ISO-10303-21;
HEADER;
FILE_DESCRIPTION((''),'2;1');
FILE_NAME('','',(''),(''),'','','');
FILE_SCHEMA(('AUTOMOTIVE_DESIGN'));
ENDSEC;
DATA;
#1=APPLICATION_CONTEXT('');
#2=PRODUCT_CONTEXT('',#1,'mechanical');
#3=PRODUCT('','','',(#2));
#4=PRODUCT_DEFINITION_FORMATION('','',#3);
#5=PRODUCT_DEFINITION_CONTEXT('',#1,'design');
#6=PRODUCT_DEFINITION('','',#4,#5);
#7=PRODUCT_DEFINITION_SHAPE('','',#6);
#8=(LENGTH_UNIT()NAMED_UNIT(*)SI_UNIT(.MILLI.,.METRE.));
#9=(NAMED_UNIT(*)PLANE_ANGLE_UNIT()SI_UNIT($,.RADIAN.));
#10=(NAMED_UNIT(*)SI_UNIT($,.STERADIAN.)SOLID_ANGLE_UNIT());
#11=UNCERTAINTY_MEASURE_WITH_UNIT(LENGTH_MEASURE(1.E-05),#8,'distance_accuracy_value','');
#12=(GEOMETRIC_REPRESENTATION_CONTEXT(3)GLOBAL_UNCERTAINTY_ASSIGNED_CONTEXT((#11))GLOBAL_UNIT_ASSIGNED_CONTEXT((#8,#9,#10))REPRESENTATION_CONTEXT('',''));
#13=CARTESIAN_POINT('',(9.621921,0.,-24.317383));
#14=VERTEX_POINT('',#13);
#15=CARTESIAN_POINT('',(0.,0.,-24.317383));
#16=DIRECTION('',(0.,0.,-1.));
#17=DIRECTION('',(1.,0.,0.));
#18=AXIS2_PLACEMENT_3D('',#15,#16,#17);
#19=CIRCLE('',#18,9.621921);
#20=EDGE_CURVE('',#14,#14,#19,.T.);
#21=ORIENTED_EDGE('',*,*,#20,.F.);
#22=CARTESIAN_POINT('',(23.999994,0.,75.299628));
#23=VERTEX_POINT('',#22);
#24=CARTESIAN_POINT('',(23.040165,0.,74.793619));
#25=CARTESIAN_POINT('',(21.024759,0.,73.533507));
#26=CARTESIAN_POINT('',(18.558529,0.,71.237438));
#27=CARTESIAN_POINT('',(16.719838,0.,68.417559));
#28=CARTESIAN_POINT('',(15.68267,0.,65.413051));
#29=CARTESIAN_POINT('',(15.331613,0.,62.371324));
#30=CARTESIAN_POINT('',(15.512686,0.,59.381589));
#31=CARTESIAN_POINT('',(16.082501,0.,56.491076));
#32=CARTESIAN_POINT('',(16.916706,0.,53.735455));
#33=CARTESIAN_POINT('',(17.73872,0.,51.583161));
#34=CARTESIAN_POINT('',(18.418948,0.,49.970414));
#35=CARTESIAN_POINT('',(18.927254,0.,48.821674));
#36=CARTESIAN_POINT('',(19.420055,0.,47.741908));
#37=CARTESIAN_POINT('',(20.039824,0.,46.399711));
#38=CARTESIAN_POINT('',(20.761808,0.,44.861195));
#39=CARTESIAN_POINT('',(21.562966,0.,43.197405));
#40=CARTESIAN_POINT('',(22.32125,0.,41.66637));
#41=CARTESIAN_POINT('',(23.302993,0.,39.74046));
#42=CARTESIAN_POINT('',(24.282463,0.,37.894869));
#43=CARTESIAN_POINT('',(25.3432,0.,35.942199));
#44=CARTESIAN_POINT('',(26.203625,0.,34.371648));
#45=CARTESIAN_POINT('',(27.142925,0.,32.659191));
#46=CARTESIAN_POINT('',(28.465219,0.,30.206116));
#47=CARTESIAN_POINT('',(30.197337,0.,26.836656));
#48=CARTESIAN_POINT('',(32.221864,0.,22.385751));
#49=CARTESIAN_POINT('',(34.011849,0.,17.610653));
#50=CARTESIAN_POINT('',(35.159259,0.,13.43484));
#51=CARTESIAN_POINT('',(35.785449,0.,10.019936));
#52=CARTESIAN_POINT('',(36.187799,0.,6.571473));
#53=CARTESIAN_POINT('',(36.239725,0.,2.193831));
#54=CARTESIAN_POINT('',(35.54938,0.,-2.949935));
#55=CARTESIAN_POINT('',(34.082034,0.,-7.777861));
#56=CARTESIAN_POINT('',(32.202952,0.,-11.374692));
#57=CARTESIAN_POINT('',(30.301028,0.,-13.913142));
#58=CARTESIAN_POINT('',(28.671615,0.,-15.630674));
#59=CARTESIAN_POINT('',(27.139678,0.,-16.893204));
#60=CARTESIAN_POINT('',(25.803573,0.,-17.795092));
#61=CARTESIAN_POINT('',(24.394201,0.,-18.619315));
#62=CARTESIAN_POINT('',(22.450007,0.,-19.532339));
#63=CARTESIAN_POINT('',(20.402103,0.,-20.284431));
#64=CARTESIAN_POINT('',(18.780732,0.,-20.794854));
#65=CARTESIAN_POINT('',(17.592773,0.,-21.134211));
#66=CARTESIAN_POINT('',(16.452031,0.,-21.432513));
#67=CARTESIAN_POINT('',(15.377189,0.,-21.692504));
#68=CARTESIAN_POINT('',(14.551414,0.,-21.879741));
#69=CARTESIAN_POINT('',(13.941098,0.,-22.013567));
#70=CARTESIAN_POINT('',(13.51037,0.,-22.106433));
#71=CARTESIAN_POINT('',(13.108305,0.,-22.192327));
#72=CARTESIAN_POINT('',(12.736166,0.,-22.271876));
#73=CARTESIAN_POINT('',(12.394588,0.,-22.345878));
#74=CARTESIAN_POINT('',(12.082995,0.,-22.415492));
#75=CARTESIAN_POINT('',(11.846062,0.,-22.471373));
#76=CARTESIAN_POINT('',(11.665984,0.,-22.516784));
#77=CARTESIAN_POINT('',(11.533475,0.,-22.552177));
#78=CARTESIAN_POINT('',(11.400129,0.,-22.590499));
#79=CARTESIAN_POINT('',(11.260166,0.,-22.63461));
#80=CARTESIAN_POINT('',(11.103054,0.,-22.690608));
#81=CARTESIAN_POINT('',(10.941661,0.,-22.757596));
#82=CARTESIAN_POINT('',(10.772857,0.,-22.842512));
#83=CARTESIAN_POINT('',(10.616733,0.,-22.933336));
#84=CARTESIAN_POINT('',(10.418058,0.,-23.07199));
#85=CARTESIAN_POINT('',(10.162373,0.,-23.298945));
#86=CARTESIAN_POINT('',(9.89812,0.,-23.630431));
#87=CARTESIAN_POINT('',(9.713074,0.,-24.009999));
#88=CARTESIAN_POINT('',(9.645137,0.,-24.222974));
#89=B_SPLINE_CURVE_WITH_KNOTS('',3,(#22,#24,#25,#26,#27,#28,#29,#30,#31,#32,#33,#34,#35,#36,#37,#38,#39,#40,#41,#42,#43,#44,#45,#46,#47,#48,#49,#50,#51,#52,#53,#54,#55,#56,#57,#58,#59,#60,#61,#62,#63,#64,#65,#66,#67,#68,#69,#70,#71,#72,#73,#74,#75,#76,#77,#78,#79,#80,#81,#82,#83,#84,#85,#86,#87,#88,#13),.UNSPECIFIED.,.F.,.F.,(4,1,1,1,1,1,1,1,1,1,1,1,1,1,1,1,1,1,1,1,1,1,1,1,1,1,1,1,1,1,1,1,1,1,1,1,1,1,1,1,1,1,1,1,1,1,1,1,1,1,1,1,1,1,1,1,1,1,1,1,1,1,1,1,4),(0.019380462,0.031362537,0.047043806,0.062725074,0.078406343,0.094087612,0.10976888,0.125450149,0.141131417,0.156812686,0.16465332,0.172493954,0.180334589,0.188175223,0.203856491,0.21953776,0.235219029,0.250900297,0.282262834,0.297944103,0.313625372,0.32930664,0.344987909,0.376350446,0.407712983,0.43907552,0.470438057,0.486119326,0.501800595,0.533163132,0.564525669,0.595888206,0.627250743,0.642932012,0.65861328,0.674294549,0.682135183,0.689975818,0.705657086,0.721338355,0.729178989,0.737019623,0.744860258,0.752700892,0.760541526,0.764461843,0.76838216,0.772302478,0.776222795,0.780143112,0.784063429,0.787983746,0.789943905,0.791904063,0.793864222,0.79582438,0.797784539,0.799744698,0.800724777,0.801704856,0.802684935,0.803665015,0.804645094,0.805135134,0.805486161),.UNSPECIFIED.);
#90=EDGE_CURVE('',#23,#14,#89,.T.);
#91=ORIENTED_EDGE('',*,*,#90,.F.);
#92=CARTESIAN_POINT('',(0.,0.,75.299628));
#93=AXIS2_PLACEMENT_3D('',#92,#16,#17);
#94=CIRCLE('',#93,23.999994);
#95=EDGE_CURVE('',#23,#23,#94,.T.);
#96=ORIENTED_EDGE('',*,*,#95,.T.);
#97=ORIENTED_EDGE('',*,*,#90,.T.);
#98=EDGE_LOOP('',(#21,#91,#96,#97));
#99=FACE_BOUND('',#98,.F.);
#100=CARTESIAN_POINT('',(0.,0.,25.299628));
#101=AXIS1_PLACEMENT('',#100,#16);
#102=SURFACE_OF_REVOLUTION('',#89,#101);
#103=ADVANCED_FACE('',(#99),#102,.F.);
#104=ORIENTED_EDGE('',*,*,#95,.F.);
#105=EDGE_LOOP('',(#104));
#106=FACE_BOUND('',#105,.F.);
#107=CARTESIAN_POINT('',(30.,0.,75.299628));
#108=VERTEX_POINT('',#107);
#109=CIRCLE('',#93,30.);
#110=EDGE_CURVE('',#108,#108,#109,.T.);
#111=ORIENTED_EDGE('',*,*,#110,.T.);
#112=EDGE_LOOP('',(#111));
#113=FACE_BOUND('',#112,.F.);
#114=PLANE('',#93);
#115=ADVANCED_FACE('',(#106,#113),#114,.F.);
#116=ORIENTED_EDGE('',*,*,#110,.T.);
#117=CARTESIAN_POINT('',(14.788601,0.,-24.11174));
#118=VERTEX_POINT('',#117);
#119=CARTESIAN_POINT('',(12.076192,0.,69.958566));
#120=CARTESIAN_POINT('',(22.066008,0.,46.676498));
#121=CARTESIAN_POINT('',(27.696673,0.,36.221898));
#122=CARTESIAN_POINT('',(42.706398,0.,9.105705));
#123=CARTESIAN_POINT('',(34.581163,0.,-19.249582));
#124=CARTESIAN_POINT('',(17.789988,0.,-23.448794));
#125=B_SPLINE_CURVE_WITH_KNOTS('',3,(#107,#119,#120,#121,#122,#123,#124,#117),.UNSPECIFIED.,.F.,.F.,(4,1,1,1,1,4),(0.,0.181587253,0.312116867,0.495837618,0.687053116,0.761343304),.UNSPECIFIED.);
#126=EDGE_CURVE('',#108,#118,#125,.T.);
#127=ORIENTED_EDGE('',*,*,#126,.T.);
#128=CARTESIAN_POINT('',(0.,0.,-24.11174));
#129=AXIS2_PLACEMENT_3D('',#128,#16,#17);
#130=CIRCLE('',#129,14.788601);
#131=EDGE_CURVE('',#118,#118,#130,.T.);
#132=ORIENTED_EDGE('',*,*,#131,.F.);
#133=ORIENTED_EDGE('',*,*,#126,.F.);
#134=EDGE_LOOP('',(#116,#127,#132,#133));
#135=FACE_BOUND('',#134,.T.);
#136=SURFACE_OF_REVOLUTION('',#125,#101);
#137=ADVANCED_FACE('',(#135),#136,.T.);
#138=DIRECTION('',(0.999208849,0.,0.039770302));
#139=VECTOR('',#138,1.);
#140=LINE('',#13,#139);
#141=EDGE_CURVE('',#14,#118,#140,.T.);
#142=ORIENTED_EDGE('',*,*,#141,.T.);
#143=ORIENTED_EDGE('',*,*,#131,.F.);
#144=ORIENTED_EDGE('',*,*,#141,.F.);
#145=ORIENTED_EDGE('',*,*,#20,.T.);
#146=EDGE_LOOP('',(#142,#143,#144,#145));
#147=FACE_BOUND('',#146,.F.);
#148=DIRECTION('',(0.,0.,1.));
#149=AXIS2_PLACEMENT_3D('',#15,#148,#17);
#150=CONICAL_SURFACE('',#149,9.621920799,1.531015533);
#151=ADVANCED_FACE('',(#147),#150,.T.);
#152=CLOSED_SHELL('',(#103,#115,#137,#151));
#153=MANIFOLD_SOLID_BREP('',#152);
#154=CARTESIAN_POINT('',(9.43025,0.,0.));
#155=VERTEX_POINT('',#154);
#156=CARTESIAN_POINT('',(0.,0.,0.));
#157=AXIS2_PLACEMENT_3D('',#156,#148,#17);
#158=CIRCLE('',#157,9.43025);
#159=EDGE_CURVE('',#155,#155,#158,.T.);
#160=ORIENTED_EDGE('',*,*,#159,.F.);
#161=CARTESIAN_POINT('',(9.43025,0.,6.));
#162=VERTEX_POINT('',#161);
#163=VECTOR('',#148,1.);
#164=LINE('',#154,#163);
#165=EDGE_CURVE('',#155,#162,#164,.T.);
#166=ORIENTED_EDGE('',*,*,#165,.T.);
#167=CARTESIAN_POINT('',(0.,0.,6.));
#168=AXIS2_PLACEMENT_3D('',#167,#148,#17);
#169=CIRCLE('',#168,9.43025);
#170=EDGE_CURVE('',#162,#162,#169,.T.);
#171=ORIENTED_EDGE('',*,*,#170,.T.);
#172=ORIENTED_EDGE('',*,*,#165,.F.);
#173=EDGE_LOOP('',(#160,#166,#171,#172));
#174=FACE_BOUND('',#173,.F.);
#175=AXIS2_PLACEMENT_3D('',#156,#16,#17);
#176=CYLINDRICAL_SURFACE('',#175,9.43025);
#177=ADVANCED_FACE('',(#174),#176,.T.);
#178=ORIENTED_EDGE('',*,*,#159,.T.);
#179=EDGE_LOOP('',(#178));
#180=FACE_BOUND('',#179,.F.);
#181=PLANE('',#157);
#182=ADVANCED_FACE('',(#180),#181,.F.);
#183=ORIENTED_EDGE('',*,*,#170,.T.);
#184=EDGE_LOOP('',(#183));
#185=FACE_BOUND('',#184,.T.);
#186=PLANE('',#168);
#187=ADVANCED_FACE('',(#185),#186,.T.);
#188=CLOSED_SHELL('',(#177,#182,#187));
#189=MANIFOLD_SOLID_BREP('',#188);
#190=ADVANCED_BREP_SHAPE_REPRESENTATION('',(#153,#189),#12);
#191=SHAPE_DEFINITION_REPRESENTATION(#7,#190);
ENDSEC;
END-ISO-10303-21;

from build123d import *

# Parameters (mm, degrees)
F3_R     = 9.4302496374
F4_DEPTH = 6


# Not quite as in the source:
# - ends of sketch curves that miss each other by under 0.0002 mm in the source are joined
# - the dataset's text gives a spline's control points without its knots; the knots are read off the source's solid


with BuildPart() as f1:
    # F0 (on Front) → F1 (revolve)
    with BuildSketch(Plane.XZ):
        with BuildLine():
            add(Edge.make_bspline(
                [(30, 75.2996280789), (12.0761917662, 69.9585662546), (22.0660075591, 46.676498365), (27.6966733214, 36.2218981282), (42.7063983627, 9.1057052867), (34.5811633648, -19.2495821704), (17.7899881188, -23.4487943823), (14.7886006228, -24.1117397402)],
                knots=[0, 0, 0, 0, 0.1815872534, 0.3121168672, 0.4958376177, 0.6870531162, 0.7613433038, 0.7613433038, 0.7613433038, 0.7613433038], degree=3))
            Line((30, 75.2996280789), (23.9999937812, 75.2996280789))
            add(Edge.make_bspline(
                [(23.9999937812, 75.2996280789), (23.0401652673, 74.7936187135), (21.0247588483, 73.5335074467), (18.5585291762, 71.2374375612), (16.7198379267, 68.4175594433), (15.6826696477, 65.4130506141), (15.331612914, 62.3713239622), (15.5126860744, 59.3815893599), (16.0825011592, 56.4910760238), (16.916705774, 53.735455434), (17.7387201772, 51.5831610633), (18.4189479706, 49.9704141376), (18.9272543321, 48.8216741349), (19.4200549077, 47.7419083495), (20.0398236053, 46.399710855), (20.761807686, 44.8611954438), (21.562965975, 43.197405411), (22.321250427, 41.6663703234), (23.3029927321, 39.7404596384), (24.2824625412, 37.8948692714), (25.343200206, 35.9421986679), (26.2036248268, 34.371647892), (27.1429247952, 32.659191045), (28.4652186968, 30.2061159952), (30.1973374203, 26.8366561034), (32.2218636423, 22.3857513618), (34.0118488472, 17.6106526585), (35.1592588041, 13.4348404718), (35.785448931, 10.0199360293), (36.1877986343, 6.5714727134), (36.2397252491, 2.1938313072), (35.5493802078, -2.9499350247), (34.0820339451, -7.7778609851), (32.2029522741, -11.3746917966), (30.3010280758, -13.9131417929), (28.6716145167, -15.6306743639), (27.1396783972, -16.8932037461), (25.803572558, -17.7950920184), (24.39420105, -18.619315045), (22.4500071463, -19.5323385504), (20.4021028111, -20.2844311556), (18.7807315029, -20.7948544502), (17.592772776, -21.134210518), (16.452031039, -21.4325127884), (15.3771894816, -21.6925038619), (14.5514142739, -21.8797412312), (13.9410981585, -22.0135668432), (13.5103701444, -22.1064333576), (13.1083048799, -22.192326543), (12.7361659904, -22.2718756926), (12.3945880535, -22.3458779112), (12.0829949511, -22.4154919187), (11.8460619557, -22.4713734196), (11.6659844883, -22.5167836099), (11.5334752407, -22.5521765476), (11.4001289551, -22.5904987487), (11.2601656039, -22.6346104606), (11.1030535346, -22.6906076905), (10.9416605144, -22.7575957417), (10.7728572344, -22.8425122924), (10.6167334994, -22.9333364829), (10.4180576805, -23.0719896525), (10.1623729849, -23.2989454947), (9.8981203684, -23.6304309896), (9.7130739302, -24.0099991802), (9.6451369281, -24.2229738932), (9.6219207987, -24.3173828521)],
                knots=[0.0193804615, 0.0193804615, 0.0193804615, 0.0193804615, 0.0313625372, 0.0470438057, 0.0627250743, 0.0784063429, 0.0940876115, 0.1097688801, 0.1254501486, 0.1411314172, 0.1568126858, 0.1646533201, 0.1724939544, 0.1803345887, 0.188175223, 0.2038564915, 0.2195377601, 0.2352190287, 0.2509002973, 0.2822628344, 0.297944103, 0.3136253716, 0.3293066402, 0.3449879088, 0.3763504459, 0.4077129831, 0.4390755202, 0.4704380574, 0.486119326, 0.5018005946, 0.5331631317, 0.5645256689, 0.595888206, 0.6272507432, 0.6429320118, 0.6586132804, 0.6742945489, 0.6821351832, 0.6899758175, 0.7056570861, 0.7213383547, 0.729178989, 0.7370196233, 0.7448602576, 0.7527008918, 0.7605415261, 0.7644618433, 0.7683821604, 0.7723024776, 0.7762227947, 0.7801431119, 0.784063429, 0.7879837462, 0.7899439047, 0.7919040633, 0.7938642219, 0.7958243804, 0.797784539, 0.7997446976, 0.8007247769, 0.8017048562, 0.8026849354, 0.8036650147, 0.804645094, 0.8051351337, 0.8054861615, 0.8054861615, 0.8054861615, 0.8054861615], degree=3))
            Line((9.6219207987, -24.3173828521), (14.7886006228, -24.1117397402))
        make_face()
    revolve(axis=Axis((0, 0, 25.2996280789), (0, 0, -1)))


with BuildPart() as f1b:
    # F0 (on Front) → F1, piece 2 (revolve)
    with BuildSketch(Plane.XZ):
        with BuildLine():
            add(Edge.make_bspline(
                [(23.9999937812, 75.2996399804), (23.0401652673, 74.7936187135), (21.0247588483, 73.5335074467), (18.5585291762, 71.2374375612), (16.7198379267, 68.4175594433), (15.6826696477, 65.4130506141), (15.331612914, 62.3713239622), (15.5126860744, 59.3815893599), (16.0825011592, 56.4910760238), (16.916705774, 53.735455434), (17.7387201772, 51.5831610633), (18.4189479706, 49.9704141376), (18.9272543321, 48.8216741349), (19.4200549077, 47.7419083495), (20.0398236053, 46.399710855), (20.761807686, 44.8611954438), (21.562965975, 43.197405411), (22.321250427, 41.6663703234), (23.3029927321, 39.7404596384), (24.2824625412, 37.8948692714), (25.343200206, 35.9421986679), (26.2036248268, 34.371647892), (27.1429247952, 32.659191045), (28.4652186968, 30.2061159952), (30.1973374203, 26.8366561034), (32.2218636423, 22.3857513618), (34.0118488472, 17.6106526585), (35.1592588041, 13.4348404718), (35.785448931, 10.0199360293), (36.1877986343, 6.5714727134), (36.2397252491, 2.1938313072), (35.5493802078, -2.9499350247), (34.0820339451, -7.7778609851), (32.2029522741, -11.3746917966), (30.3010280758, -13.9131417929), (28.6716145167, -15.6306743639), (27.1396783972, -16.8932037461), (25.803572558, -17.7950920184), (24.39420105, -18.619315045), (22.4500071463, -19.5323385504), (20.4021028111, -20.2844311556), (18.7807315029, -20.7948544502), (17.592772776, -21.134210518), (16.452031039, -21.4325127884), (15.3771894816, -21.6925038619), (14.5514142739, -21.8797412312), (13.9410981585, -22.0135668432), (13.5103701444, -22.1064333576), (13.1083048799, -22.192326543), (12.7361659904, -22.2718756926), (12.3945880535, -22.3458779112), (12.0829949511, -22.4154919187), (11.8460619557, -22.4713734196), (11.6659844883, -22.5167836099), (11.5334752407, -22.5521765476), (11.4001289551, -22.5904987487), (11.2601656039, -22.6346104606), (11.1030535346, -22.6906076905), (10.9416605144, -22.7575957417), (10.7728572344, -22.8425122924), (10.6167334994, -22.9333364829), (10.4180576805, -23.0719896525), (10.1623729849, -23.2989454947), (9.8981203684, -23.6304309896), (9.7130739302, -24.0099991802), (9.6451369281, -24.2229738932), (9.6219207987, -24.3173828521)],
                knots=[0.0193804615, 0.0193804615, 0.0193804615, 0.0193804615, 0.0313625372, 0.0470438057, 0.0627250743, 0.0784063429, 0.0940876115, 0.1097688801, 0.1254501486, 0.1411314172, 0.1568126858, 0.1646533201, 0.1724939544, 0.1803345887, 0.188175223, 0.2038564915, 0.2195377601, 0.2352190287, 0.2509002973, 0.2822628344, 0.297944103, 0.3136253716, 0.3293066402, 0.3449879088, 0.3763504459, 0.4077129831, 0.4390755202, 0.4704380574, 0.486119326, 0.5018005946, 0.5331631317, 0.5645256689, 0.595888206, 0.6272507432, 0.6429320118, 0.6586132804, 0.6742945489, 0.6821351832, 0.6899758175, 0.7056570861, 0.7213383547, 0.729178989, 0.7370196233, 0.7448602576, 0.7527008918, 0.7605415261, 0.7644618433, 0.7683821604, 0.7723024776, 0.7762227947, 0.7801431119, 0.784063429, 0.7879837462, 0.7899439047, 0.7919040633, 0.7938642219, 0.7958243804, 0.797784539, 0.7997446976, 0.8007247769, 0.8017048562, 0.8026849354, 0.8036650147, 0.804645094, 0.8051351337, 0.8054861615, 0.8054861615, 0.8054861615, 0.8054861615], degree=3))
            Line((23.9999937812, 75.2996399804), (0, 75.2996280789))
            Line((0, 75.2996280789), (0, -24.7003719211))
            Line((0, -24.7003719211), (9.6219207987, -24.3173828521))
        make_face()
    revolve(axis=Axis((0, 0, 25.2996280789), (0, 0, -1)))

    # F0 (on Front) → F2 (revolve, cut)
    with BuildSketch(Plane.XZ):
        with BuildLine():
            add(Edge.make_bspline(
                [(23.9999937812, 75.2996399804), (23.0401652673, 74.7936187135), (21.0247588483, 73.5335074467), (18.5585291762, 71.2374375612), (16.7198379267, 68.4175594433), (15.6826696477, 65.4130506141), (15.331612914, 62.3713239622), (15.5126860744, 59.3815893599), (16.0825011592, 56.4910760238), (16.916705774, 53.735455434), (17.7387201772, 51.5831610633), (18.4189479706, 49.9704141376), (18.9272543321, 48.8216741349), (19.4200549077, 47.7419083495), (20.0398236053, 46.399710855), (20.761807686, 44.8611954438), (21.562965975, 43.197405411), (22.321250427, 41.6663703234), (23.3029927321, 39.7404596384), (24.2824625412, 37.8948692714), (25.343200206, 35.9421986679), (26.2036248268, 34.371647892), (27.1429247952, 32.659191045), (28.4652186968, 30.2061159952), (30.1973374203, 26.8366561034), (32.2218636423, 22.3857513618), (34.0118488472, 17.6106526585), (35.1592588041, 13.4348404718), (35.785448931, 10.0199360293), (36.1877986343, 6.5714727134), (36.2397252491, 2.1938313072), (35.5493802078, -2.9499350247), (34.0820339451, -7.7778609851), (32.2029522741, -11.3746917966), (30.3010280758, -13.9131417929), (28.6716145167, -15.6306743639), (27.1396783972, -16.8932037461), (25.803572558, -17.7950920184), (24.39420105, -18.619315045), (22.4500071463, -19.5323385504), (20.4021028111, -20.2844311556), (18.7807315029, -20.7948544502), (17.592772776, -21.134210518), (16.452031039, -21.4325127884), (15.3771894816, -21.6925038619), (14.5514142739, -21.8797412312), (13.9410981585, -22.0135668432), (13.5103701444, -22.1064333576), (13.1083048799, -22.192326543), (12.7361659904, -22.2718756926), (12.3945880535, -22.3458779112), (12.0829949511, -22.4154919187), (11.8460619557, -22.4713734196), (11.6659844883, -22.5167836099), (11.5334752407, -22.5521765476), (11.4001289551, -22.5904987487), (11.2601656039, -22.6346104606), (11.1030535346, -22.6906076905), (10.9416605144, -22.7575957417), (10.7728572344, -22.8425122924), (10.6167334994, -22.9333364829), (10.4180576805, -23.0719896525), (10.1623729849, -23.2989454947), (9.8981203684, -23.6304309896), (9.7130739302, -24.0099991802), (9.6451369281, -24.2229738932), (9.6219207987, -24.3173828521)],
                knots=[0.0193804615, 0.0193804615, 0.0193804615, 0.0193804615, 0.0313625372, 0.0470438057, 0.0627250743, 0.0784063429, 0.0940876115, 0.1097688801, 0.1254501486, 0.1411314172, 0.1568126858, 0.1646533201, 0.1724939544, 0.1803345887, 0.188175223, 0.2038564915, 0.2195377601, 0.2352190287, 0.2509002973, 0.2822628344, 0.297944103, 0.3136253716, 0.3293066402, 0.3449879088, 0.3763504459, 0.4077129831, 0.4390755202, 0.4704380574, 0.486119326, 0.5018005946, 0.5331631317, 0.5645256689, 0.595888206, 0.6272507432, 0.6429320118, 0.6586132804, 0.6742945489, 0.6821351832, 0.6899758175, 0.7056570861, 0.7213383547, 0.729178989, 0.7370196233, 0.7448602576, 0.7527008918, 0.7605415261, 0.7644618433, 0.7683821604, 0.7723024776, 0.7762227947, 0.7801431119, 0.784063429, 0.7879837462, 0.7899439047, 0.7919040633, 0.7938642219, 0.7958243804, 0.797784539, 0.7997446976, 0.8007247769, 0.8017048562, 0.8026849354, 0.8036650147, 0.804645094, 0.8051351337, 0.8054861615, 0.8054861615, 0.8054861615, 0.8054861615], degree=3))
            Line((23.9999937812, 75.2996399804), (0, 75.2996280789))
            Line((0, 75.2996280789), (0, -24.7003719211))
            Line((0, -24.7003719211), (9.6219207987, -24.3173828521))
        make_face()
    revolve(axis=Axis((0, 0, 25.2996280789), (0, 0, -1)), mode=Mode.SUBTRACT)


with BuildPart() as f4:
    # F3 (on Top) → F4 (new body)
    with BuildSketch(Plane.XY):
        Circle(F3_R)
    extrude(amount=F4_DEPTH)


solid = Compound([f1.part, f4.part])
